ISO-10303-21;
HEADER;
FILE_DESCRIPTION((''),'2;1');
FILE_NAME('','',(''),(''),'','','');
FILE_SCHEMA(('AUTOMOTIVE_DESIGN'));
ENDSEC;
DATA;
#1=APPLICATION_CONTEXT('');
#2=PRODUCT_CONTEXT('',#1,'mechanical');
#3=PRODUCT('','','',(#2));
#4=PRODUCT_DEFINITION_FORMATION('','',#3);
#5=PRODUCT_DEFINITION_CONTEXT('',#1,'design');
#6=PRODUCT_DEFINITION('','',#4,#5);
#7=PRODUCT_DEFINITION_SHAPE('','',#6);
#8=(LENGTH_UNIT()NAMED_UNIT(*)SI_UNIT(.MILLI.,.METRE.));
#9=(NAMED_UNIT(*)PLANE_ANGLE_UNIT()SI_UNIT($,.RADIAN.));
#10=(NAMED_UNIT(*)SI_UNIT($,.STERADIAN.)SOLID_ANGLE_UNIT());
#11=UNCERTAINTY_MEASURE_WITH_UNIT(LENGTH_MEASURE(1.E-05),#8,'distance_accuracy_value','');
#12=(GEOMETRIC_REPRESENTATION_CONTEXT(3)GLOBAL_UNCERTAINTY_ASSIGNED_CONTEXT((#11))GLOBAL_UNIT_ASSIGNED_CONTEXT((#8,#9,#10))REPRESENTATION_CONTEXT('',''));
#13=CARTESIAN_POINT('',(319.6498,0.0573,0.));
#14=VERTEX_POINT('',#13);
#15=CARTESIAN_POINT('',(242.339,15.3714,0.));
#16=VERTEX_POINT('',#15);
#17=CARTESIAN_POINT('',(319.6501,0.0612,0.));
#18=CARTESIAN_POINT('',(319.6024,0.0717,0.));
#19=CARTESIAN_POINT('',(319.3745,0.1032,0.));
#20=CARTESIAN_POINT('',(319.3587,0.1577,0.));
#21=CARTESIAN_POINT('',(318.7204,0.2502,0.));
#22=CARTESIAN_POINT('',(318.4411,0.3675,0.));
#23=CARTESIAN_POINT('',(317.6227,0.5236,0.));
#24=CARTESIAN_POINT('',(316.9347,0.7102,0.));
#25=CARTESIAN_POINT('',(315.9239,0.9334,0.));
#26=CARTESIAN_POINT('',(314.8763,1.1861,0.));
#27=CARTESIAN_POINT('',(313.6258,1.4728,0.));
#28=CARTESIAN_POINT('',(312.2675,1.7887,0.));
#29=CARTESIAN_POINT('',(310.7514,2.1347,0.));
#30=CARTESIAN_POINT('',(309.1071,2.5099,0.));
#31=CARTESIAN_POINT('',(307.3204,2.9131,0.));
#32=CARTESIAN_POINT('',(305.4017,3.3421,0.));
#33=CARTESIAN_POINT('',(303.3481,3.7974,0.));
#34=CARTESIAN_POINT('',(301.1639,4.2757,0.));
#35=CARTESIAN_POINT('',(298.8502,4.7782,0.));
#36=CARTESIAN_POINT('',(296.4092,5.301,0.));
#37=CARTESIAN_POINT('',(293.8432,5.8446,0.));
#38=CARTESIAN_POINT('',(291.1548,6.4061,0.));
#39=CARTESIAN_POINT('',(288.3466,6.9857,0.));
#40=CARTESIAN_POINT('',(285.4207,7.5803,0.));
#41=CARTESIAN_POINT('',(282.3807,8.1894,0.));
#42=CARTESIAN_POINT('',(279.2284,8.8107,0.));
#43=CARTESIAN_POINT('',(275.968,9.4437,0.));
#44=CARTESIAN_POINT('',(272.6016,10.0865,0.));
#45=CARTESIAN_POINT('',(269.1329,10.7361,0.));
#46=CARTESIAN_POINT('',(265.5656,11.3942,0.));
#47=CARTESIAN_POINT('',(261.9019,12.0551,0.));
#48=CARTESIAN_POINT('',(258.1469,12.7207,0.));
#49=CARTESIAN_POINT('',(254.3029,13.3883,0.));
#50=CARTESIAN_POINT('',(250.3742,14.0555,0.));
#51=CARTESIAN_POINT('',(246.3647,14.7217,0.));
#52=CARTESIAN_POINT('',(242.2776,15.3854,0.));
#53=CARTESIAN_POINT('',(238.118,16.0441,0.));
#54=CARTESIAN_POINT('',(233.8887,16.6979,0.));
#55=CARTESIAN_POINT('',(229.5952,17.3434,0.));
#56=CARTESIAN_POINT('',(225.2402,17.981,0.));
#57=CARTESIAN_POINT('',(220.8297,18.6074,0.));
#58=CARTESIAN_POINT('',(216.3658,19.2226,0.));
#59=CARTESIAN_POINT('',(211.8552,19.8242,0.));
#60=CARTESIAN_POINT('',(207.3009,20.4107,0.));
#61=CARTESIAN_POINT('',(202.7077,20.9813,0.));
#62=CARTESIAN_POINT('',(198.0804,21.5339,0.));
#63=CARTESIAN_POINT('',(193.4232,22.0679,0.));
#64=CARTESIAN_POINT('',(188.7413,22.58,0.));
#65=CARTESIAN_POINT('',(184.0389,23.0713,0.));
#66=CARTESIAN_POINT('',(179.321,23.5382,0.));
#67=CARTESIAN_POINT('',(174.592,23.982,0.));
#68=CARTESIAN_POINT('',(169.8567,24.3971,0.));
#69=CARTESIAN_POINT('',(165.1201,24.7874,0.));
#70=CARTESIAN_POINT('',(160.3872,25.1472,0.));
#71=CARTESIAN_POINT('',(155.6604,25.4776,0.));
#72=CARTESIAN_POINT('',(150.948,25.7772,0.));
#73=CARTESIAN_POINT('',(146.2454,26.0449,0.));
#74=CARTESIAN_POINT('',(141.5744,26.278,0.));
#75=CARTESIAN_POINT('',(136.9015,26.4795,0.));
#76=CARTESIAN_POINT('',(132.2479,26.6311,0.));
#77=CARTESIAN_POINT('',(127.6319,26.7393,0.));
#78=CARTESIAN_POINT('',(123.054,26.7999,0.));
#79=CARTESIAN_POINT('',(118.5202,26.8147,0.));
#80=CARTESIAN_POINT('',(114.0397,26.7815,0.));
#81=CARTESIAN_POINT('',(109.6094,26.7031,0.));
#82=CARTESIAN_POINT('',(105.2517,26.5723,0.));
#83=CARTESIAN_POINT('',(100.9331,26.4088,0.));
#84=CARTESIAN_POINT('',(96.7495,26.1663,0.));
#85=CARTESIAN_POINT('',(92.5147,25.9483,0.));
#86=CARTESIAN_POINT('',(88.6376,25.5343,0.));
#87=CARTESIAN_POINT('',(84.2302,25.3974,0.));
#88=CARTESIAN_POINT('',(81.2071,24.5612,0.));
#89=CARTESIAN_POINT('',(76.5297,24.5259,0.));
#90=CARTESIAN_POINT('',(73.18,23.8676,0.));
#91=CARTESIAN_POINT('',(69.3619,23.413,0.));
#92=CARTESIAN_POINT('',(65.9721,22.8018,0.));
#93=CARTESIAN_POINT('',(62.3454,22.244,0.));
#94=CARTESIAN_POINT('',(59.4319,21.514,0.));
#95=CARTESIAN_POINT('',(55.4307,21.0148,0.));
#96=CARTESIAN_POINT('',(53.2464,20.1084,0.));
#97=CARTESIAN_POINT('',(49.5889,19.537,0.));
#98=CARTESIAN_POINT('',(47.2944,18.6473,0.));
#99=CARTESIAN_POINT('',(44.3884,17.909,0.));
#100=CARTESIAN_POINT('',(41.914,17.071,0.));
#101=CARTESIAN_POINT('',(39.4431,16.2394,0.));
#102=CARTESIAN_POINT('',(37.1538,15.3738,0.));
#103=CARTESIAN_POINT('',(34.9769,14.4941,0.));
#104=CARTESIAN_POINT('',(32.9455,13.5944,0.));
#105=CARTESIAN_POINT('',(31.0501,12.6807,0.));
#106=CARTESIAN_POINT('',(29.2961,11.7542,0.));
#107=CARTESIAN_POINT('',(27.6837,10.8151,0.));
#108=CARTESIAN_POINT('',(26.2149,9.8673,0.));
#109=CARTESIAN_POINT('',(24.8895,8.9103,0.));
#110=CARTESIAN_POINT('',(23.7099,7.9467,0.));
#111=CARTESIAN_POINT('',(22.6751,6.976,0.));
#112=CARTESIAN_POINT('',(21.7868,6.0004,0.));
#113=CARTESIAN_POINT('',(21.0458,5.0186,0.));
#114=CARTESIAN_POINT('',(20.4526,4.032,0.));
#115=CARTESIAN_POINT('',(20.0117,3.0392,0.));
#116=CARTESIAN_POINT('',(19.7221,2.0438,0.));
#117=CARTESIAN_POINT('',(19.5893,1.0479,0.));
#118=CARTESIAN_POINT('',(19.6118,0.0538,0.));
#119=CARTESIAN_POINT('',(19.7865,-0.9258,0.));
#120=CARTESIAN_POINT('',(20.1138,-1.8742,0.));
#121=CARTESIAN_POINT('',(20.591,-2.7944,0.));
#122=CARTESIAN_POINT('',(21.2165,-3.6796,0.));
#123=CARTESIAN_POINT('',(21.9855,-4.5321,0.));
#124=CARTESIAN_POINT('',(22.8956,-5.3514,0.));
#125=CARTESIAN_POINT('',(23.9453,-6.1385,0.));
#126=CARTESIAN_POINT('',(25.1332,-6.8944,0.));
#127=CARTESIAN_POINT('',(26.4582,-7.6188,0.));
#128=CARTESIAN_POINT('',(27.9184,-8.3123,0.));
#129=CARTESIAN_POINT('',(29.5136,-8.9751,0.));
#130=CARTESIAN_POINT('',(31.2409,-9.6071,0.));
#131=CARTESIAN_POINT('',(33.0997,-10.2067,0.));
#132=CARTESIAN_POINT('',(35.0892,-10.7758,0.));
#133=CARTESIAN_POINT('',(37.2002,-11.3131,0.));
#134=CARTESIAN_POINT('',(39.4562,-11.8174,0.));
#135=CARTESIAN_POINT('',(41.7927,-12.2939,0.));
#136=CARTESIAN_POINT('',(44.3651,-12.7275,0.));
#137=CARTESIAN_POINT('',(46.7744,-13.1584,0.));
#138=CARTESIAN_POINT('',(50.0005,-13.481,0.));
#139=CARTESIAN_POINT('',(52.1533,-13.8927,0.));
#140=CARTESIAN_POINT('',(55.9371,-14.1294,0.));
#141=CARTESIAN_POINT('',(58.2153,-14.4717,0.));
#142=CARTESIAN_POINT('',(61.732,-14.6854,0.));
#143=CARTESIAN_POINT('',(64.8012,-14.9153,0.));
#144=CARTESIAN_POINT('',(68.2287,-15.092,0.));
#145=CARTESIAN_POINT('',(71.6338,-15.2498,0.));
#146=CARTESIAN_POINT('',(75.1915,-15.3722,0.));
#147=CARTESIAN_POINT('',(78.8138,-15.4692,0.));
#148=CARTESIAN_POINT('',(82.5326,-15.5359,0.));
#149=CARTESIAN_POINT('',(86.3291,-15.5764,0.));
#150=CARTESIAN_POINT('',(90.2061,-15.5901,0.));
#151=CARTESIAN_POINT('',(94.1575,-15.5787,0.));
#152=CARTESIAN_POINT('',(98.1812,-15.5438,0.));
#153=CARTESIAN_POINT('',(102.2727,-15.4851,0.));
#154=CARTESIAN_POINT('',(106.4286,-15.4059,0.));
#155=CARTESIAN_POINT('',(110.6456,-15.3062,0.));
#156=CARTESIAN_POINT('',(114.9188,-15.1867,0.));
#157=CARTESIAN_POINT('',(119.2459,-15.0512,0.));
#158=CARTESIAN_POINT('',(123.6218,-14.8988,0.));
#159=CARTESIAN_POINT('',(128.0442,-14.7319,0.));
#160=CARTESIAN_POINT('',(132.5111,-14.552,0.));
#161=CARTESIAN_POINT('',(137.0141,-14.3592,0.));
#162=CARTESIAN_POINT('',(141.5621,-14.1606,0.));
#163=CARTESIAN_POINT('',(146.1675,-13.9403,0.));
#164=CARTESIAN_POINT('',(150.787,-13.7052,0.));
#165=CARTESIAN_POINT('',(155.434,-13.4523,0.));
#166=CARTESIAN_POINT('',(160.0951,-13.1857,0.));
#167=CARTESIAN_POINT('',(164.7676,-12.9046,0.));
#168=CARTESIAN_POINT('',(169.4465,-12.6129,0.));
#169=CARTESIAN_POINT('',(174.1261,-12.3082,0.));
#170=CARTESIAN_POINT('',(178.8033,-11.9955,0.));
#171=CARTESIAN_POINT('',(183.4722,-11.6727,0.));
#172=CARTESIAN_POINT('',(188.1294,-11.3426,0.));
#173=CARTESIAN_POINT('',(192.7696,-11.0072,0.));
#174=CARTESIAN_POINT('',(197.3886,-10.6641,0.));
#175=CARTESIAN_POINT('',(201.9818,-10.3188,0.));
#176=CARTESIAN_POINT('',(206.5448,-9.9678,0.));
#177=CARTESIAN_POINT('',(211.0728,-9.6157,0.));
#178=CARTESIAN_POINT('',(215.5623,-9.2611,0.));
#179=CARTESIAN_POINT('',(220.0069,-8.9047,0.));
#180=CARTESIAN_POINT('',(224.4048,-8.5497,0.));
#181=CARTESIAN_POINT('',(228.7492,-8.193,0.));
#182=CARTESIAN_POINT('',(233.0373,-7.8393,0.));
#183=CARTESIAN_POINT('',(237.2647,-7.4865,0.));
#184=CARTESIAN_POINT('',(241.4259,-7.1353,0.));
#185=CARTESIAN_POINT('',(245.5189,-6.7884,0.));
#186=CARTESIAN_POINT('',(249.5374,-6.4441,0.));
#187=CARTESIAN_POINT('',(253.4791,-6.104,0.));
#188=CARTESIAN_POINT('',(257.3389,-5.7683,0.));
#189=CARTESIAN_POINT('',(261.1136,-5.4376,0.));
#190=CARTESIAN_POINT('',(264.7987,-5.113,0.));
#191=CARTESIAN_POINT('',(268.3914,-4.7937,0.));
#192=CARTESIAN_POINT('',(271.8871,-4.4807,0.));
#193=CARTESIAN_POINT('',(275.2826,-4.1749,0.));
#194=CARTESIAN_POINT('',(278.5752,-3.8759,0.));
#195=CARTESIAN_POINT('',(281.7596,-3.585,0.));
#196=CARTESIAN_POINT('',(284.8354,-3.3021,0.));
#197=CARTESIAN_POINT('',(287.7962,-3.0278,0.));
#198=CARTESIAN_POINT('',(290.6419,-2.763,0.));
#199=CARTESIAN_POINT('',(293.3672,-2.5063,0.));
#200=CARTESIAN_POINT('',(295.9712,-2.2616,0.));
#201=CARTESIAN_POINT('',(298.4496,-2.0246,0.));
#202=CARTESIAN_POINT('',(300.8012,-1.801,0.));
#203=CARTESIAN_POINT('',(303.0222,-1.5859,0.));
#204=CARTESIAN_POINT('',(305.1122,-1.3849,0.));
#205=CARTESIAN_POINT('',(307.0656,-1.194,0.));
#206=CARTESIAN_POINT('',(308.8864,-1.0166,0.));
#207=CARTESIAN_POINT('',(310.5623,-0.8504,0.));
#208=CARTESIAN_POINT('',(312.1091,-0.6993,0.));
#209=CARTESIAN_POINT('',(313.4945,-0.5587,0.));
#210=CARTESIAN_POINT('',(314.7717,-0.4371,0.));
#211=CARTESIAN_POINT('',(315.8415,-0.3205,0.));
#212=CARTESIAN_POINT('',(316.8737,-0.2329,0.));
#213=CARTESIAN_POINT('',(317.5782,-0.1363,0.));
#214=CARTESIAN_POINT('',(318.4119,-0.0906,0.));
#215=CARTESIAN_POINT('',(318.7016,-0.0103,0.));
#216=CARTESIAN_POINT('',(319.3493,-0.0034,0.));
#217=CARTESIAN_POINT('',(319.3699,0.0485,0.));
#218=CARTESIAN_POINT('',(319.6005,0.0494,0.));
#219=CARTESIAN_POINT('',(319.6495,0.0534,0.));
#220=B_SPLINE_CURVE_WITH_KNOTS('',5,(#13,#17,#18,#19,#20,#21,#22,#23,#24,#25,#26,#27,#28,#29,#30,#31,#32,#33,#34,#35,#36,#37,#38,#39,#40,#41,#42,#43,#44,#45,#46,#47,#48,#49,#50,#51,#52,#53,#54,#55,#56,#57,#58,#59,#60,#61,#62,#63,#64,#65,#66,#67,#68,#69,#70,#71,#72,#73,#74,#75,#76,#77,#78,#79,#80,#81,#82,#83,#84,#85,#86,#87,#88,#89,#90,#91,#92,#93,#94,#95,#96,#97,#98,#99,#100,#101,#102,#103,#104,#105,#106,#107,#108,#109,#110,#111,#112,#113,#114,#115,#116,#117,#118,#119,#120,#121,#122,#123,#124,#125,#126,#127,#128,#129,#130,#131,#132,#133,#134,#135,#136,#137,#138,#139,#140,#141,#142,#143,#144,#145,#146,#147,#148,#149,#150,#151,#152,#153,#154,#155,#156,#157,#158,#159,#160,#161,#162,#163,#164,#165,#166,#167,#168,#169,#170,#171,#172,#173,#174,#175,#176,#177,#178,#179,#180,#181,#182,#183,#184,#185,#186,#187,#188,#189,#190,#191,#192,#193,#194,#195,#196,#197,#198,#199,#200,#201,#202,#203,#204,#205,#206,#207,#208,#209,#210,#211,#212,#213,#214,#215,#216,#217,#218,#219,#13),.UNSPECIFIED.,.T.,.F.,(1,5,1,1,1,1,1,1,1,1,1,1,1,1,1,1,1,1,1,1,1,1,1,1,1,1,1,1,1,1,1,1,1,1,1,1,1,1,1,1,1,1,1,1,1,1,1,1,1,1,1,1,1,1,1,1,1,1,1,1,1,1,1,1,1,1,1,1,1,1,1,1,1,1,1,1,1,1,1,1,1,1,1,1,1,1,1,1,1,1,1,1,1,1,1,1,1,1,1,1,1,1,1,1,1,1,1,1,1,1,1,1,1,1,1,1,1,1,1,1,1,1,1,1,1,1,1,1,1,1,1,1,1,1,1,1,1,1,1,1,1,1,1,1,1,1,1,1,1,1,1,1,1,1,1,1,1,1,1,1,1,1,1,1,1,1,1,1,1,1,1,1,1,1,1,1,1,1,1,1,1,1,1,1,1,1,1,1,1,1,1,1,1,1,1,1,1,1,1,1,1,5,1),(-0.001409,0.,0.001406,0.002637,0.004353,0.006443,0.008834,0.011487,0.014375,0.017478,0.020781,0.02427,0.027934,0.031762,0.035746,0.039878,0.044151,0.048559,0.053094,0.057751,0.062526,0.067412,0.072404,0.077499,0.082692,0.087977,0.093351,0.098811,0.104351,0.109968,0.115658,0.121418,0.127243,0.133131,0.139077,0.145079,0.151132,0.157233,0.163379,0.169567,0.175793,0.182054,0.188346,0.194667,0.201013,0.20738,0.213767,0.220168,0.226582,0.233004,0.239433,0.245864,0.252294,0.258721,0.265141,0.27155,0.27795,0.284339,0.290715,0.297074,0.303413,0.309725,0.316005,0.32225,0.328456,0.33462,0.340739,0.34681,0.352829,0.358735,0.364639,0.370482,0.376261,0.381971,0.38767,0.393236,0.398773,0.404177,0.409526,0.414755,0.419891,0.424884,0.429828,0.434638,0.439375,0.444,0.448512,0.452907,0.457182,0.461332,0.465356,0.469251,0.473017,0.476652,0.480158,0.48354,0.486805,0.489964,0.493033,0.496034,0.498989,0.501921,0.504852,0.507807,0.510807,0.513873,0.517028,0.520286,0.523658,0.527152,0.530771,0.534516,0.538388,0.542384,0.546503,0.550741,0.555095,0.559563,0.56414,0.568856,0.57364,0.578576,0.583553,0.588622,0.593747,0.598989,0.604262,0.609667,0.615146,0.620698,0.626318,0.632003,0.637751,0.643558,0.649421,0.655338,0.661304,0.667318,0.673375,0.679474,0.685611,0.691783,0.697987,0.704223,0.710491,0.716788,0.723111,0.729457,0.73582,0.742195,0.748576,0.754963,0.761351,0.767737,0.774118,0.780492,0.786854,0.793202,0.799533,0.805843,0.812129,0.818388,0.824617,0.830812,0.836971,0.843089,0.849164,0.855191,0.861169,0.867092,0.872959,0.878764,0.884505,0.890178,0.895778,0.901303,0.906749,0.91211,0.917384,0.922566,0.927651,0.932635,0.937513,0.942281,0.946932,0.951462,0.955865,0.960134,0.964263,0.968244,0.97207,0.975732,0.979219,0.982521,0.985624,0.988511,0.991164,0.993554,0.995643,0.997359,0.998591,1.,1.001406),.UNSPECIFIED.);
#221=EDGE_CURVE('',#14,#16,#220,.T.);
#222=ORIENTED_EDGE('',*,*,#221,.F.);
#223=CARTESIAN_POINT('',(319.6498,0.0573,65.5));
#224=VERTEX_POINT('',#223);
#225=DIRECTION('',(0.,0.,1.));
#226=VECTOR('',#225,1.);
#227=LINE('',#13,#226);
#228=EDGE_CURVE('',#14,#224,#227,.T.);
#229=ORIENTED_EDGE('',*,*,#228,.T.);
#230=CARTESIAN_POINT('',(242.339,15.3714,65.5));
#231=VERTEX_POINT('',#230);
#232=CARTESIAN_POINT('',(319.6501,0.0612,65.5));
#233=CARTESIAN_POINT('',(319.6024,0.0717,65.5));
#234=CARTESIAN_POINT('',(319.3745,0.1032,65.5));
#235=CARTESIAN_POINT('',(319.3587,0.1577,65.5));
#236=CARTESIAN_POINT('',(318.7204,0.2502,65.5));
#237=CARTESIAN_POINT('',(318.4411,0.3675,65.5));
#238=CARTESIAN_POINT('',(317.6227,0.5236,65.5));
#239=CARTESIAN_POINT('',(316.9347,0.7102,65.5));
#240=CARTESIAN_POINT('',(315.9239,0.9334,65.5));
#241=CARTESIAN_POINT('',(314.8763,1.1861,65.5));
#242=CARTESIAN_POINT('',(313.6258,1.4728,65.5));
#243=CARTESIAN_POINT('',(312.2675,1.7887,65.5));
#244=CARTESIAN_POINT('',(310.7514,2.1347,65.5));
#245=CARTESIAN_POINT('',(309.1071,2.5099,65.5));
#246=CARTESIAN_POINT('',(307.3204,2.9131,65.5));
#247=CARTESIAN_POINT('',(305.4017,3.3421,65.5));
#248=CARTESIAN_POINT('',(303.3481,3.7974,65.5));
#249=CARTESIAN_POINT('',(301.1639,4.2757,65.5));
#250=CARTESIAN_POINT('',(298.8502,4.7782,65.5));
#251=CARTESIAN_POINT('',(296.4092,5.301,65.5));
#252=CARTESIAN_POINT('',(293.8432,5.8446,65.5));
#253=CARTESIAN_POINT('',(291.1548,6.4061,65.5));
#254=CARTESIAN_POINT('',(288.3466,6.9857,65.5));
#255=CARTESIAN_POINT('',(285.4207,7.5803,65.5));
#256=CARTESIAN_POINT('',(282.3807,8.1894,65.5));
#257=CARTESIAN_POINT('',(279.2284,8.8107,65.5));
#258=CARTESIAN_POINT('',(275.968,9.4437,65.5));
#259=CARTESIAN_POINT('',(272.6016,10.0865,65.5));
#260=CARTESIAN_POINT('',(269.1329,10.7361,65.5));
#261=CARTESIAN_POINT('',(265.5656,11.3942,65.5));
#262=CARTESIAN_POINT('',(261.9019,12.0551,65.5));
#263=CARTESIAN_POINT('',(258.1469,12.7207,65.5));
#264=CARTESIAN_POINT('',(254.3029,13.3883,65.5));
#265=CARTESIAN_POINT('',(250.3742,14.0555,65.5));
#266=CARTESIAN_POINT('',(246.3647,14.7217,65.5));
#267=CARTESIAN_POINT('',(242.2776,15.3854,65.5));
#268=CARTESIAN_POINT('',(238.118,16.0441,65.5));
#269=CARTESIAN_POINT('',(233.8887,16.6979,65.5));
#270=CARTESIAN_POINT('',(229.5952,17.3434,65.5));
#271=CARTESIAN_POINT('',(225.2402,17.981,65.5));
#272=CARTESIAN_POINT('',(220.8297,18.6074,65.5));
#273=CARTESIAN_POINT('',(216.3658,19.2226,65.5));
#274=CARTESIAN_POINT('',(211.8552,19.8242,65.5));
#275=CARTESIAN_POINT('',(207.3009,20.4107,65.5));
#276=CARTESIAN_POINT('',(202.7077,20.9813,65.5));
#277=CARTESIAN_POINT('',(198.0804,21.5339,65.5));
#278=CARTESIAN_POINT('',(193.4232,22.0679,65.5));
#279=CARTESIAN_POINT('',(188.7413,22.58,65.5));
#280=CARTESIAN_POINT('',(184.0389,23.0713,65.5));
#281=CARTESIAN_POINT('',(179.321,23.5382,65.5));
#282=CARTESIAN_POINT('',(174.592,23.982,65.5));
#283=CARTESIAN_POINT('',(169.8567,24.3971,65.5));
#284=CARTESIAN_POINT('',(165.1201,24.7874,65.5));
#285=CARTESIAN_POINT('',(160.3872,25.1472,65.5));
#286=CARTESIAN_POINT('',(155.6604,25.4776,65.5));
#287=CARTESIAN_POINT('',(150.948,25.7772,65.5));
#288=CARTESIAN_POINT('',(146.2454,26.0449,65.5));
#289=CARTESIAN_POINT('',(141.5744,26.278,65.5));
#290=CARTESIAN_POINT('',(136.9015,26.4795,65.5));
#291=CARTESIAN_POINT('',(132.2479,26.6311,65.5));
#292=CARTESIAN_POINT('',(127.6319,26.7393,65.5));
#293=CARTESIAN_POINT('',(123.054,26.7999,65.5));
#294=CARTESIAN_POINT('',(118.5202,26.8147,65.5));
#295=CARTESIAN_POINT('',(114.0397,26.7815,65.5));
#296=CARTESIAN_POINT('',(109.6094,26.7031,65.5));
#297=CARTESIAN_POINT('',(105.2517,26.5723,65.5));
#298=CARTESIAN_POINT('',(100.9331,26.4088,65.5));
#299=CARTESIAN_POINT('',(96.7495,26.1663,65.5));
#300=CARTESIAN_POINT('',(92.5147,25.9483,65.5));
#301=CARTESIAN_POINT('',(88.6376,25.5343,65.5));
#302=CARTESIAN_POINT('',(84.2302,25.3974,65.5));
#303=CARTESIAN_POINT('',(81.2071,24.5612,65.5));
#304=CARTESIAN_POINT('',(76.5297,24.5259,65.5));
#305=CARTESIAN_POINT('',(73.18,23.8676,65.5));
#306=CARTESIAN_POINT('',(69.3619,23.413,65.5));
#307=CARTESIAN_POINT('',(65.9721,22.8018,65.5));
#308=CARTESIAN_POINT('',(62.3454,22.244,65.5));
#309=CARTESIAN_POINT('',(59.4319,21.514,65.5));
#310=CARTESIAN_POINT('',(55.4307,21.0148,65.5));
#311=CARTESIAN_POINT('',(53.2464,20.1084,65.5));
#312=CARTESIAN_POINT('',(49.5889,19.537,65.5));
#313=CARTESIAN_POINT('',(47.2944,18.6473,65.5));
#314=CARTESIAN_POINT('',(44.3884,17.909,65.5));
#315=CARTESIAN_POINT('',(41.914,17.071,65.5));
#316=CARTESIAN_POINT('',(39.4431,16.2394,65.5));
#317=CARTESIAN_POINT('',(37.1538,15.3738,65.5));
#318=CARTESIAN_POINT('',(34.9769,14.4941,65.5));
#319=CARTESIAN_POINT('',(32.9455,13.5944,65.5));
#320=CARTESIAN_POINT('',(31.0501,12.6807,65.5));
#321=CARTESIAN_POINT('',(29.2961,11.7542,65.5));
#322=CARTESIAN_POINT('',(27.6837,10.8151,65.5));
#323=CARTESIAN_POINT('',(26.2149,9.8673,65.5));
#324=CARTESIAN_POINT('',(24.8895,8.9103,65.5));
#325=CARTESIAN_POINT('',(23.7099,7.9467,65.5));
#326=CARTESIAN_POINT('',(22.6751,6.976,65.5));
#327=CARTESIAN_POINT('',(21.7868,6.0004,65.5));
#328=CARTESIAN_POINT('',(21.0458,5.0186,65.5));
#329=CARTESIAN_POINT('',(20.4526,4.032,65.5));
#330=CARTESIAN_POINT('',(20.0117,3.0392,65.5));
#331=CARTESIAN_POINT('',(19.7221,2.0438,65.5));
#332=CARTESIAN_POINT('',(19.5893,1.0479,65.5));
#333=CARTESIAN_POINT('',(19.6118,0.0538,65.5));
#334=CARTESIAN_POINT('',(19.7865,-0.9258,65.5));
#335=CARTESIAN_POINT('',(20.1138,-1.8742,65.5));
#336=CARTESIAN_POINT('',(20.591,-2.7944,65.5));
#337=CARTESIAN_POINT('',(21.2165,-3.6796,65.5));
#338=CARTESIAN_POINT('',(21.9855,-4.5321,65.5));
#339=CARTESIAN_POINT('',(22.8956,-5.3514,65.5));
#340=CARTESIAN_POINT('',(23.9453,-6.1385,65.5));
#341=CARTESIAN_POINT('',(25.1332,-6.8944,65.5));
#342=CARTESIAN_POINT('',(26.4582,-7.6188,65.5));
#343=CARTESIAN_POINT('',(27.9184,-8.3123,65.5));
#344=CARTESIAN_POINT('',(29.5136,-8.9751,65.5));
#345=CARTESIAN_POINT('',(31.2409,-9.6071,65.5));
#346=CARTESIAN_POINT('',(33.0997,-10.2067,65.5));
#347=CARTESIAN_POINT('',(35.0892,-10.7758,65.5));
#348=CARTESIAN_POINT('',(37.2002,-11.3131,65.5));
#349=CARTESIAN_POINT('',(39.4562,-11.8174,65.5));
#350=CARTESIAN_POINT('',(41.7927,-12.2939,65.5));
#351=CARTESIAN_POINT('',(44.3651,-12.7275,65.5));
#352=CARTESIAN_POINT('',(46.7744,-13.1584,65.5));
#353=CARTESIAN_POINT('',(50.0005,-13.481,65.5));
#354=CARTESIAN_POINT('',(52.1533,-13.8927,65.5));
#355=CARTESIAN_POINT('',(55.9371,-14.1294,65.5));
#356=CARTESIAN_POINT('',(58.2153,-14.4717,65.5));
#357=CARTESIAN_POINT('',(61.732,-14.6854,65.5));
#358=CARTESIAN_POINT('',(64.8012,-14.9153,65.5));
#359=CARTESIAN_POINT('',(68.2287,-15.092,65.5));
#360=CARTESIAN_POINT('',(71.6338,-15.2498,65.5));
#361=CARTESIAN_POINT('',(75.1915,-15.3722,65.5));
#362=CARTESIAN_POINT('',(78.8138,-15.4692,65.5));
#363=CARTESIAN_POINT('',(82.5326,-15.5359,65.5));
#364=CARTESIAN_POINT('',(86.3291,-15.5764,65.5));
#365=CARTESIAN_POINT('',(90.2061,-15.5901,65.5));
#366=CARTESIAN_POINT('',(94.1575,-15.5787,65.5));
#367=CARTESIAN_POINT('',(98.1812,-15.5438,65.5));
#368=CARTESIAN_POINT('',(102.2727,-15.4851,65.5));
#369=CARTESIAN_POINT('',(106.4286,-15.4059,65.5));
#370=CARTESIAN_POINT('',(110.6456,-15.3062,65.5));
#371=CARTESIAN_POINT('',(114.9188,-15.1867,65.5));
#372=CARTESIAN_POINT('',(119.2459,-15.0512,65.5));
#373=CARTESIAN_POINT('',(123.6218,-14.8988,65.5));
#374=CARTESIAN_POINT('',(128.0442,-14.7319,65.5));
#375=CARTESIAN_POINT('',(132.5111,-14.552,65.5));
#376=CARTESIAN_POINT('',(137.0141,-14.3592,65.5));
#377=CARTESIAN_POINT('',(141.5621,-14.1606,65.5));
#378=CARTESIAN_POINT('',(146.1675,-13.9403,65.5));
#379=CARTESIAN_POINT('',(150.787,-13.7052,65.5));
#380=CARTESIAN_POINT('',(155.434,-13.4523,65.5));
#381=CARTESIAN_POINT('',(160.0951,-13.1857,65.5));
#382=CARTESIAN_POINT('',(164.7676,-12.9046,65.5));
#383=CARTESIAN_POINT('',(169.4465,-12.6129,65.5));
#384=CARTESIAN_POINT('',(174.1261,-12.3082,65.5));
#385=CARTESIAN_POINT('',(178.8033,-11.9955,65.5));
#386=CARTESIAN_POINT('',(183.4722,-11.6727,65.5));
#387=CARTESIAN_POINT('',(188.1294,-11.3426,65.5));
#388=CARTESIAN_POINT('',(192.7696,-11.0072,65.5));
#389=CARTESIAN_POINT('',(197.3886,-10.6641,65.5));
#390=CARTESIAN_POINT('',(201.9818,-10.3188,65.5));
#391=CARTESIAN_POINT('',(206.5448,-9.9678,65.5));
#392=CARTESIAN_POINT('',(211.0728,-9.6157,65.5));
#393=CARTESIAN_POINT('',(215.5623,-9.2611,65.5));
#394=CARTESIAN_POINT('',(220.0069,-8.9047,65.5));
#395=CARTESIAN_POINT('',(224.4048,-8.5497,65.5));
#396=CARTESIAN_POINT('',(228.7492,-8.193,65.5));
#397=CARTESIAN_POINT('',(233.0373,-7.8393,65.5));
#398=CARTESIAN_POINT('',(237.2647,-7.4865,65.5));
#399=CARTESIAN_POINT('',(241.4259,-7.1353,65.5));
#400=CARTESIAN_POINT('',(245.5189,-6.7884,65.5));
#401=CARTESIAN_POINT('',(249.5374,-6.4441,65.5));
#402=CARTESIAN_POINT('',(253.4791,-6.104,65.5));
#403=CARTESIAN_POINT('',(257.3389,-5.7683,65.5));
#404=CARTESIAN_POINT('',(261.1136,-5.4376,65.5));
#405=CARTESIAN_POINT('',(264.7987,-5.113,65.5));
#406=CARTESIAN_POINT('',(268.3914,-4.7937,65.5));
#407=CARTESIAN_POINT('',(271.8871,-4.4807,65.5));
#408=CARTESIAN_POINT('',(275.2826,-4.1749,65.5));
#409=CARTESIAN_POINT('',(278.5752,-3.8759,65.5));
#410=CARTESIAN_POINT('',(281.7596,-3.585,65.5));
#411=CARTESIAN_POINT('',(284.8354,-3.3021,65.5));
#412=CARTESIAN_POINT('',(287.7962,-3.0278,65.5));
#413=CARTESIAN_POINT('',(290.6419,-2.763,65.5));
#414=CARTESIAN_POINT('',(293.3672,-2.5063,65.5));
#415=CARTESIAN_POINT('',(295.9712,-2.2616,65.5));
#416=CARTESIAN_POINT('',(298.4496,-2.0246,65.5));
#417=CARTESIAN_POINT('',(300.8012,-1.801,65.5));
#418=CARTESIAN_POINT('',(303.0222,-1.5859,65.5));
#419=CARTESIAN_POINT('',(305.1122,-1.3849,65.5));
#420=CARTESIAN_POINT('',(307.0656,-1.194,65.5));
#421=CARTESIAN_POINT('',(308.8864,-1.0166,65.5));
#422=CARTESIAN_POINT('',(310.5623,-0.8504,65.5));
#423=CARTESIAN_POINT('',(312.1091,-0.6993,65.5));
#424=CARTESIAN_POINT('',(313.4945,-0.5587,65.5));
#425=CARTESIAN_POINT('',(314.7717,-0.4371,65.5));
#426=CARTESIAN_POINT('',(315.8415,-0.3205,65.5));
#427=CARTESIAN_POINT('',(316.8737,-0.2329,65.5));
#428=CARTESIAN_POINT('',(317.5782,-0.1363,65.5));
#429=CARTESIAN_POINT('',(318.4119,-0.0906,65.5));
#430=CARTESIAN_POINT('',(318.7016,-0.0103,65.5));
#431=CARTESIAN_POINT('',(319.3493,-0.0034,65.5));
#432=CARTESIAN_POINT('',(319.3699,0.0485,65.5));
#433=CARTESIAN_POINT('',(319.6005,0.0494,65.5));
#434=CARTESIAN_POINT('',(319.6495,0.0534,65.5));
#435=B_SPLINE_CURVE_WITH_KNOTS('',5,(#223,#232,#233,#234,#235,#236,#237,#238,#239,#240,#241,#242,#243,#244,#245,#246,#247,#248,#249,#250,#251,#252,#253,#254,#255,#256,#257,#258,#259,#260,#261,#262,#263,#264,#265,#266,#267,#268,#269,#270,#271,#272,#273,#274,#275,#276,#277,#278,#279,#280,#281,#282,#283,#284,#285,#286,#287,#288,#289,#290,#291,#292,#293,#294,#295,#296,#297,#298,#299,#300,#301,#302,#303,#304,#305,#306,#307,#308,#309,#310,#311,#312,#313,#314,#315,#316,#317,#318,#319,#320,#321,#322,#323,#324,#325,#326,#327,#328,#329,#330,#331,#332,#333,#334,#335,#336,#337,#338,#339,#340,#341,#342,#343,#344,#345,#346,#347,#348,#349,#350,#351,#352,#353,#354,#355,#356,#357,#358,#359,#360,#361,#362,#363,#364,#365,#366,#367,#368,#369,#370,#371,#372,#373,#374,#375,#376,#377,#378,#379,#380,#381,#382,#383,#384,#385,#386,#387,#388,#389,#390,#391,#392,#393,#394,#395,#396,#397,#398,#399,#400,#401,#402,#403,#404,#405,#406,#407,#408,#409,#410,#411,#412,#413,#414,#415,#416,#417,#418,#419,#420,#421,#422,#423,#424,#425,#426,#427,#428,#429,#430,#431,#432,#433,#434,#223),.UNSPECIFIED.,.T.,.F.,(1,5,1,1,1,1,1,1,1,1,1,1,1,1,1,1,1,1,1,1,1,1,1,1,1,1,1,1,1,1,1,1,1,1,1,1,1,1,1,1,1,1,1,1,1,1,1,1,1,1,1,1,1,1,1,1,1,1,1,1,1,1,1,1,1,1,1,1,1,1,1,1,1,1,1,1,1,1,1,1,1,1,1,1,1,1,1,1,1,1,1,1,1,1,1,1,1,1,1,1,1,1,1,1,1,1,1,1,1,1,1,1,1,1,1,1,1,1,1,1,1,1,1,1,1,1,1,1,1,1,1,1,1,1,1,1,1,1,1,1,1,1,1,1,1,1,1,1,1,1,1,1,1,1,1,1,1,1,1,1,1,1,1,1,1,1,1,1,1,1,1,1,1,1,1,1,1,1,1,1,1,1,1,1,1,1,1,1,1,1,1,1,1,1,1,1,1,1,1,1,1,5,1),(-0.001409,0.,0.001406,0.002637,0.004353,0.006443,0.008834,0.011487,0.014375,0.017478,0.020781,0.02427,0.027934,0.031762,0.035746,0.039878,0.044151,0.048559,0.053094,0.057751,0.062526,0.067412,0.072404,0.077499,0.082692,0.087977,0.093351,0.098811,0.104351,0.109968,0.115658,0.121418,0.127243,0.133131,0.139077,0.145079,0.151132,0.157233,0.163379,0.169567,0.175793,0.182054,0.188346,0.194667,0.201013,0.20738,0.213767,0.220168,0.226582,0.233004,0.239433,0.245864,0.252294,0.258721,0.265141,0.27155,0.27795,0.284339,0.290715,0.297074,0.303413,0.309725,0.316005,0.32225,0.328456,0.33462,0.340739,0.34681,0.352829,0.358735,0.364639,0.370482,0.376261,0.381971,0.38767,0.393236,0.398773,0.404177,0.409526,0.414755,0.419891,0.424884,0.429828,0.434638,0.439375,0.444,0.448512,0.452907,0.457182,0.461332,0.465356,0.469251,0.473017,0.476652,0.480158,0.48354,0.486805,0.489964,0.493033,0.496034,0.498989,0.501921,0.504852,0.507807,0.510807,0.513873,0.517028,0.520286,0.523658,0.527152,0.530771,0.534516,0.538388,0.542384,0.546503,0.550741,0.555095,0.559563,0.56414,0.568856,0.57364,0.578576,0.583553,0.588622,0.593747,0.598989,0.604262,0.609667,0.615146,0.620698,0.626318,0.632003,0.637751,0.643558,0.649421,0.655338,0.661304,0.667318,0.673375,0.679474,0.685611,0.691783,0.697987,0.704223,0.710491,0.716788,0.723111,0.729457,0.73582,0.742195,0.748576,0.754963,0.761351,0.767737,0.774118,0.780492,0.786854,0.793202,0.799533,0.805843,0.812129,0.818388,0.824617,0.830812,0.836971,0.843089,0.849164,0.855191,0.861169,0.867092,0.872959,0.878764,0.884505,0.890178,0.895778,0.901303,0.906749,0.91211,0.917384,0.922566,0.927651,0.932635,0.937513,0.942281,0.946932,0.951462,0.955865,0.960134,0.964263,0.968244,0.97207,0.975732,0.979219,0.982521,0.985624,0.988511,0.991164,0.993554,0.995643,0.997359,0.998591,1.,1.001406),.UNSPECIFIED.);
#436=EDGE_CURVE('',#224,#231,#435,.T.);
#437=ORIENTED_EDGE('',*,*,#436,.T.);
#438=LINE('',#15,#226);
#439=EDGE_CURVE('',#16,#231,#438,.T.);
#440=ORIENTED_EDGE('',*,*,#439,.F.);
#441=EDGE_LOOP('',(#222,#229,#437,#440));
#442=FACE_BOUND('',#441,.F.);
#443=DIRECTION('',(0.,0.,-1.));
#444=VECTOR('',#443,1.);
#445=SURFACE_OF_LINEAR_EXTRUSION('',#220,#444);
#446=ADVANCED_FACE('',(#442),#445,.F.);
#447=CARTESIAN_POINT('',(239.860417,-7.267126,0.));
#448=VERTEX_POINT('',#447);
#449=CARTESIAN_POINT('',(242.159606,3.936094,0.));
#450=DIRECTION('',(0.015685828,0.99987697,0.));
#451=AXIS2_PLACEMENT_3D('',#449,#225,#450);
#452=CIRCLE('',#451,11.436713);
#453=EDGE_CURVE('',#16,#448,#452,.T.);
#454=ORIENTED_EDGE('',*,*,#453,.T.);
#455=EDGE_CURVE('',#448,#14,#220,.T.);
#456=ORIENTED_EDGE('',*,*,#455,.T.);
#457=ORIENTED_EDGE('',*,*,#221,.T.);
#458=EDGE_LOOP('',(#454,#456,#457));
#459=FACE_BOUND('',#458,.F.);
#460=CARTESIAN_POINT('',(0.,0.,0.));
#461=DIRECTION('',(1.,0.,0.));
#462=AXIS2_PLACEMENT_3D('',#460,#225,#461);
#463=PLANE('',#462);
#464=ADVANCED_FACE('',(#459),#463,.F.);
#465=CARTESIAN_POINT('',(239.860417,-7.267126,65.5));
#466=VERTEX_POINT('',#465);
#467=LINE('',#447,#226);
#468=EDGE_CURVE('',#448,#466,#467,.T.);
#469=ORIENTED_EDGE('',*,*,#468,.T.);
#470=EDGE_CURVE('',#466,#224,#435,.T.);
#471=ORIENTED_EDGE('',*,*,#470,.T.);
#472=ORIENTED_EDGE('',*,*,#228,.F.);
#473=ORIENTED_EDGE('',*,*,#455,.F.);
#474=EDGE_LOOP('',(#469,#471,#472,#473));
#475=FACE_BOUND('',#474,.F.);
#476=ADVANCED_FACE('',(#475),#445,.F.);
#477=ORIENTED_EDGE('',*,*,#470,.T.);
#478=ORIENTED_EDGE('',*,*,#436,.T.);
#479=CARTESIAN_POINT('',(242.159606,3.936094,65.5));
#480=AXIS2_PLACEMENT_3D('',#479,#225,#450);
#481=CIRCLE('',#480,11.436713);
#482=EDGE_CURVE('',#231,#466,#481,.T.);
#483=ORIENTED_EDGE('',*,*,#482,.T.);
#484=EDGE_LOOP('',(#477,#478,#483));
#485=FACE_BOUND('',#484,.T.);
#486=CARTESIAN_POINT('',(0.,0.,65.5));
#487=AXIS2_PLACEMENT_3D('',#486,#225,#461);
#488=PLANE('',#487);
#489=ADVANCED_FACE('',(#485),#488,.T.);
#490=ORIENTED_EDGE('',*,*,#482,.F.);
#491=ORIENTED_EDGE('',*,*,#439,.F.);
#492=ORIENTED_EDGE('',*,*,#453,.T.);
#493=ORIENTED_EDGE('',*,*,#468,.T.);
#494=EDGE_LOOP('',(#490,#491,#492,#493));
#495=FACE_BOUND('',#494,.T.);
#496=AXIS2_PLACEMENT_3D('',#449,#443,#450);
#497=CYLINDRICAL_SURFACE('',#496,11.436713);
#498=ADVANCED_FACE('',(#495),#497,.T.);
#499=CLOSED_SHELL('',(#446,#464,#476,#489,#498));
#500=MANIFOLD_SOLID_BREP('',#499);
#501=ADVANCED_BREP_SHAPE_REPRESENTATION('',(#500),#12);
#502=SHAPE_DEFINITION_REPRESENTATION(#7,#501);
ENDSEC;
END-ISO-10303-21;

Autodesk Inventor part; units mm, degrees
ref_plane "YZ Plane" through (0, 0, 0) normal (1, 0, 0) x (0, 1, 0)
ref_plane "XZ Plane" through (0, 0, 0) normal (0, 1, 0) x (-1, 0, 0)
ref_plane "XY Plane" through (0, 0, 0) normal (0, 0, 1) x (1, 0, 0)
sketch "Sketch2" plane through (0, 0, 0) normal (0, 0, 1) x (1, 0, 0)
  spline S0 degree 5 poles (319.6498, 0.0573) (319.6501, 0.0612) (319.6024, 0.0717) (319.3745, 0.1032) (319.3587, 0.1577) (318.7204, 0.2502) (318.4411, 0.3675) (317.6227, 0.5236) (316.9347, 0.7102) (315.9239, 0.9334) (314.8763, 1.1861) (313.6258, 1.4728) (312.2675, 1.7887) (310.7514, 2.1347) (309.1071, 2.5099) (307.3204, 2.9131) (305.4017, 3.3421) (303.3481, 3.7974) (301.1639, 4.2757) (298.8502, 4.7782) (296.4092, 5.301) (293.8432, 5.8446) (291.1548, 6.4061) (288.3466, 6.9857) (285.4207, 7.5803) (282.3807, 8.1894) (279.2284, 8.8107) (275.968, 9.4437) (272.6016, 10.0865) (269.1329, 10.7361) (265.5656, 11.3942) (261.9019, 12.0551) (258.1469, 12.7207) (254.3029, 13.3883) (250.3742, 14.0555) (246.3647, 14.7217) (242.2776, 15.3854) (238.118, 16.0441) (233.8887, 16.6979) (229.5952, 17.3434) (225.2402, 17.981) (220.8297, 18.6074) (216.3658, 19.2226) (211.8552, 19.8242) (207.3009, 20.4107) (202.7077, 20.9813) (198.0804, 21.5339) (193.4232, 22.0679) (188.7413, 22.58) (184.0389, 23.0713) (179.321, 23.5382) (174.592, 23.982) (169.8567, 24.3971) (165.1201, 24.7874) (160.3872, 25.1472) (155.6604, 25.4776) (150.948, 25.7772) (146.2454, 26.0449) (141.5744, 26.278) (136.9015, 26.4795) (132.2479, 26.6311) (127.6319, 26.7393) (123.054, 26.7999) (118.5202, 26.8147) (114.0397, 26.7815) (109.6094, 26.7031) (105.2517, 26.5723) (100.9331, 26.4088) (96.7495, 26.1663) (92.5147, 25.9483) (88.6376, 25.5343) (84.2302, 25.3974) (81.2071, 24.5612) (76.5297, 24.5259) (73.18, 23.8676) (69.3619, 23.413) (65.9721, 22.8018) (62.3454, 22.244) (59.4319, 21.514) (55.4307, 21.0148) (53.2464, 20.1084) (49.5889, 19.537) (47.2944, 18.6473) (44.3884, 17.909) (41.914, 17.071) (39.4431, 16.2394) (37.1538, 15.3738) (34.9769, 14.4941) (32.9455, 13.5944) (31.0501, 12.6807) (29.2961, 11.7542) (27.6837, 10.8151) (26.2149, 9.8673) (24.8895, 8.9103) (23.7099, 7.9467) (22.6751, 6.976) (21.7868, 6.0004) (21.0458, 5.0186) (20.4526, 4.032) (20.0117, 3.0392) (19.7221, 2.0438) (19.5893, 1.0479) (19.6118, 0.0538) (19.7865, -0.9258) (20.1138, -1.8742) (20.591, -2.7944) (21.2165, -3.6796) (21.9855, -4.5321) (22.8956, -5.3514) (23.9453, -6.1385) (25.1332, -6.8944) (26.4582, -7.6188) (27.9184, -8.3123) (29.5136, -8.9751) (31.2409, -9.6071) (33.0997, -10.2067) (35.0892, -10.7758) (37.2002, -11.3131) (39.4562, -11.8174) (41.7927, -12.2939) (44.3651, -12.7275) (46.7744, -13.1584) (50.0005, -13.481) (52.1533, -13.8927) (55.9371, -14.1294) (58.2153, -14.4717) (61.732, -14.6854) (64.8012, -14.9153) (68.2287, -15.092) (71.6338, -15.2498) (75.1915, -15.3722) (78.8138, -15.4692) (82.5326, -15.5359) (86.3291, -15.5764) (90.2061, -15.5901) (94.1575, -15.5787) (98.1812, -15.5438) (102.2727, -15.4851) (106.4286, -15.4059) (110.6456, -15.3062) (114.9188, -15.1867) (119.2459, -15.0512) (123.6218, -14.8988) (128.0442, -14.7319) (132.5111, -14.552) (137.0141, -14.3592) (141.5621, -14.1606) (146.1675, -13.9403) (150.787, -13.7052) (155.434, -13.4523) (160.0951, -13.1857) (164.7676, -12.9046) (169.4465, -12.6129) (174.1261, -12.3082) (178.8033, -11.9955) (183.4722, -11.6727) (188.1294, -11.3426) (192.7696, -11.0072) (197.3886, -10.6641) (201.9818, -10.3188) (206.5448, -9.9678) (211.0728, -9.6157) (215.5623, -9.2611) (220.0069, -8.9047) (224.4048, -8.5497) (228.7492, -8.193) (233.0373, -7.8393) (237.2647, -7.4865) (241.4259, -7.1353) (245.5189, -6.7884) (249.5374, -6.4441) (253.4791, -6.104) (257.3389, -5.7683) (261.1136, -5.4376) (264.7987, -5.113) (268.3914, -4.7937) (271.8871, -4.4807) (275.2826, -4.1749) (278.5752, -3.8759) (281.7596, -3.585) (284.8354, -3.3021) (287.7962, -3.0278) (290.6419, -2.763) (293.3672, -2.5063) (295.9712, -2.2616) (298.4496, -2.0246) (300.8012, -1.801) (303.0222, -1.5859) (305.1122, -1.3849) (307.0656, -1.194) (308.8864, -1.0166) (310.5623, -0.8504) (312.1091, -0.6993) (313.4945, -0.5587) (314.7717, -0.4371) (315.8415, -0.3205) (316.8737, -0.2329) (317.5782, -0.1363) (318.4119, -0.0906) (318.7016, -0.0103) (319.3493, -0.0034) (319.3699, 0.0485) (319.6005, 0.0494) (319.6495, 0.0534) (319.6498, 0.0573) knots 0 0 0 0 0 0 0.001406 0.002637 0.004353 0.006443 0.008834 0.011487 0.014375 0.017478 0.020781 0.02427 0.027934 0.031762 0.035746 0.039878 0.044151 0.048559 0.053094 0.057751 0.062526 0.067412 0.072404 0.077499 0.082692 0.087977 0.093351 0.098811 0.104351 0.109968 0.115658 0.121418 0.127243 0.133131 0.139077 0.145079 0.151132 0.157233 0.163379 0.169567 0.175793 0.182054 0.188346 0.194667 0.201013 0.20738 0.213767 0.220168 0.226582 0.233004 0.239433 0.245864 0.252294 0.258721 0.265141 0.27155 0.27795 0.284339 0.290715 0.297074 0.303413 0.309725 0.316005 0.32225 0.328456 0.33462 0.340739 0.34681 0.352829 0.358735 0.364639 0.370482 0.376261 0.381971 0.38767 0.393236 0.398773 0.404177 0.409526 0.414755 0.419891 0.424884 0.429828 0.434638 0.439375 0.444 0.448512 0.452907 0.457182 0.461332 0.465356 0.469251 0.473017 0.476652 0.480158 0.48354 0.486805 0.489964 0.493033 0.496034 0.498989 0.501921 0.504852 0.507807 0.510807 0.513873 0.517028 0.520286 0.523658 0.527152 0.530771 0.534516 0.538388 0.542384 0.546503 0.550741 0.555095 0.559563 0.56414 0.568856 0.57364 0.578576 0.583553 0.588622 0.593747 0.598989 0.604262 0.609667 0.615146 0.620698 0.626318 0.632003 0.637751 0.643558 0.649421 0.655338 0.661304 0.667318 0.673375 0.679474 0.685611 0.691783 0.697987 0.704223 0.710491 0.716788 0.723111 0.729457 0.73582 0.742195 0.748576 0.754963 0.761351 0.767737 0.774118 0.780492 0.786854 0.793202 0.799533 0.805843 0.812129 0.818388 0.824617 0.830812 0.836971 0.843089 0.849164 0.855191 0.861169 0.867092 0.872959 0.878764 0.884505 0.890178 0.895778 0.901303 0.906749 0.91211 0.917384 0.922566 0.927651 0.932635 0.937513 0.942281 0.946932 0.951462 0.955865 0.960134 0.964263 0.968244 0.97207 0.975732 0.979219 0.982521 0.985624 0.988511 0.991164 0.993554 0.995643 0.997359 0.998591 1 1 1 1 1 1
  circle A0 centre (83.0595, 4.5678) radius 11.5675
  line L0 (83.0595, 4.5678) -> (83.0595, 25.0384) construction
  line L1 (83.0595, 4.5678) -> (209.6498, 4.5678) construction
  line L2 (319.6498, 0.0573) -> (219.6498, 0.0573) construction
  line L3 (219.6499, 18.7671) -> (219.6499, -8.9327) construction
  line L4 (28.0055, 4.5054) -> (28.0055, -2.4946)
  line L5 (19.627, 1.0326) -> (319.6498, 0.0573) construction
  line L6 (49.7105, 14.4213) -> (55.6079, 14.4213)
  line L7 (49.7104, -8.4915) -> (55.6078, -8.4915)
  line L8 (28.0055, 4.5054) -> (49.7105, 14.4213)
  line L9 (28.0055, -2.4946) -> (49.7104, -8.4915)
  line L10 (55.6079, 14.4213) -> (55.6079, 20.8726)
  line L11 (55.6078, -8.4915) -> (55.6078, -14.1513)
  line L12 (108.6496, 16.3299) -> (108.6496, -7.1942)
  line L13 (110.8735, -9.1817) -> (193.8736, 0.1678)
  line L14 (195.6498, 2.1552) -> (195.6498, 6.9805)
  line L15 (193.8736, 8.9679) -> (110.8735, 18.3173)
  arc A1 (110.8735, 18.3173) -> (108.6496, 16.3299) centre (110.6496, 16.3299) ccw
  arc A2 (108.6496, -7.1942) -> (110.8735, -9.1817) centre (110.6496, -7.1942) ccw
  arc A3 (193.8736, 0.1678) -> (195.6498, 2.1552) centre (193.6498, 2.1552) ccw
  arc A4 (195.6498, 6.9805) -> (193.8736, 8.9679) centre (193.6498, 6.9805) ccw
  circle A5 centre (209.6498, 0.0573) radius 3
  line L16 (319.6498, 0.0573) -> (229.6498, 0.0573) construction
  arc A6 (242.339, 15.3714) -> (241.4866, -7.4808) centre (242.1596, 3.9361) ccw
  point P0 (0, 0)
  point P1 (319.3573, 0.1272)
  point P2 (318.9918, 0.2142)
  point P3 (318.4802, 0.3354)
  point P4 (317.8238, 0.4911)
  point P5 (317.0222, 0.6801)
  point P6 (316.0769, 0.9024)
  point P7 (314.9885, 1.1568)
  point P8 (313.7582, 1.443)
  point P9 (312.3866, 1.7598)
  point P10 (310.8752, 2.1063)
  point P11 (309.2258, 2.4819)
  point P12 (307.4393, 2.8854)
  point P13 (305.5178, 3.3153)
  point P14 (303.4628, 3.7707)
  point P15 (301.2764, 4.2501)
  point P16 (298.9607, 4.7526)
  point P17 (296.5175, 5.2764)
  point P18 (293.9492, 5.8203)
  point P19 (291.2585, 6.3828)
  point P20 (288.4478, 6.9627)
  point P21 (285.5195, 7.5582)
  point P22 (282.4766, 8.1678)
  point P23 (279.3218, 8.79)
  point P24 (276.0584, 9.4236)
  point P25 (272.6891, 10.0668)
  point P26 (269.2175, 10.7178)
  point P27 (265.6469, 11.3757)
  point P28 (261.9803, 12.0381)
  point P29 (258.2219, 12.7041)
  point P30 (254.3747, 13.3722)
  point P31 (250.4426, 14.0403)
  point P32 (246.4295, 14.7072)
  point P33 (238.1756, 16.0311)
  point P34 (233.9428, 16.6851)
  point P35 (229.6454, 17.3316)
  point P36 (225.2869, 17.9694)
  point P37 (220.8723, 18.5967)
  point P38 (216.4049, 19.2123)
  point P39 (211.8901, 19.8144)
  point P40 (207.332, 20.4015)
  point P41 (202.7347, 20.9724)
  point P42 (198.1034, 21.5256)
  point P43 (193.4423, 22.0596)
  point P44 (188.7563, 22.5726)
  point P45 (184.0499, 23.0637)
  point P46 (179.3279, 23.5314)
  point P47 (174.5948, 23.9745)
  point P48 (169.8554, 24.3909)
  point P49 (165.1148, 24.7803)
  point P50 (160.3775, 25.1406)
  point P51 (155.6479, 25.4709)
  point P52 (150.9316, 25.7703)
  point P53 (146.233, 26.0373)
  point P54 (141.557, 26.2707)
  point P55 (136.882, 26.4681)
  point P56 (132.2209, 26.6211)
  point P57 (127.5964, 26.7282)
  point P58 (123.0133, 26.7888)
  point P59 (118.4761, 26.8026)
  point P60 (113.9902, 26.7693)
  point P61 (109.5601, 26.6886)
  point P62 (105.191, 26.5611)
  point P63 (100.8866, 26.3866)
  point P64 (96.6524, 26.1647)
  point P65 (92.4927, 25.8975)
  point P66 (88.4121, 25.5832)
  point P67 (84.4152, 25.2282)
  point P68 (80.9052, 24.7441)
  point P69 (76.6873, 24.3761)
  point P70 (72.9635, 23.8905)
  point P71 (69.3402, 23.3611)
  point P72 (65.8208, 22.7938)
  point P73 (62.4086, 22.1883)
  point P74 (59.107, 21.5464)
  point P75 (52.8493, 20.1606)
  point P76 (49.7105, 19.4213)
  point P77 (47.0737, 18.6507)
  point P78 (44.3741, 17.8542)
  point P79 (41.8034, 17.0322)
  point P80 (39.3638, 16.1874)
  point P81 (37.0583, 15.3213)
  point P82 (34.8884, 14.4363)
  point P83 (32.8568, 13.534)
  point P84 (30.965, 12.6166)
  point P85 (29.2145, 11.686)
  point P86 (27.6071, 10.7437)
  point P87 (26.1443, 9.7921)
  point P88 (24.8269, 8.8324)
  point P89 (23.6566, 7.8664)
  point P90 (22.6336, 6.8953)
  point P91 (21.7591, 5.9209)
  point P92 (21.0334, 4.9441)
  point P93 (20.4571, 3.9661)
  point P94 (20.0308, 2.9875)
  point P95 (19.7539, 2.0098)
  point P96 (19.6496, 0.0573)
  point P97 (19.8205, -0.9033)
  point P98 (20.1376, -1.8357)
  point P99 (20.6002, -2.7402)
  point P100 (21.208, -3.6159)
  point P101 (21.9598, -4.4628)
  point P102 (22.8544, -5.2806)
  point P103 (23.8909, -6.069)
  point P104 (25.0681, -6.8277)
  point P105 (26.3846, -7.5561)
  point P106 (27.8384, -8.2539)
  point P107 (29.4284, -8.9211)
  point P108 (31.1522, -9.5571)
  point P109 (33.0086, -10.1613)
  point P110 (34.9949, -10.734)
  point P111 (37.1093, -11.2746)
  point P112 (39.3497, -11.7828)
  point P113 (41.7134, -12.2586)
  point P114 (44.198, -12.702)
  point P115 (46.8014, -13.1127)
  point P116 (49.7104, -13.4915)
  point P117 (52.3532, -13.8357)
  point P118 (58.3469, -14.4294)
  point P119 (61.5023, -14.6781)
  point P120 (64.7591, -14.8953)
  point P121 (68.1149, -15.0813)
  point P122 (71.5661, -15.237)
  point P123 (75.1094, -15.3627)
  point P124 (78.7418, -15.4596)
  point P125 (82.46, -15.528)
  point P126 (86.2607, -15.5691)
  point P127 (90.14, -15.5838)
  point P128 (94.0946, -15.5733)
  point P129 (98.1212, -15.5388)
  point P130 (102.2159, -15.4812)
  point P131 (106.3751, -15.4023)
  point P132 (110.5952, -15.303)
  point P133 (114.872, -15.1845)
  point P134 (119.2022, -15.0489)
  point P135 (123.5813, -14.8971)
  point P136 (128.006, -14.7306)
  point P137 (132.4718, -14.5509)
  point P138 (136.9748, -14.3598)
  point P139 (141.5285, -14.1576)
  point P140 (146.1365, -13.9383)
  point P141 (150.7679, -13.7022)
  point P142 (155.4191, -13.4499)
  point P143 (160.0853, -13.1829)
  point P144 (164.7617, -12.9024)
  point P145 (169.4444, -12.6099)
  point P146 (174.1283, -12.306)
  point P147 (178.8092, -11.9925)
  point P148 (183.4823, -11.67)
  point P149 (188.1434, -11.34)
  point P150 (192.7877, -11.0037)
  point P151 (197.4106, -10.6614)
  point P152 (202.0079, -10.3149)
  point P153 (206.5747, -9.9645)
  point P154 (211.1069, -9.6117)
  point P155 (215.5999, -9.2568)
  point P156 (220.0489, -8.9007)
  point P157 (224.4503, -8.5446)
  point P158 (228.7987, -8.1885)
  point P159 (233.0906, -7.8339)
  point P160 (237.3214, -7.4808)
  point P161 (241.4866, -7.1298)
  point P162 (245.5828, -6.7821)
  point P163 (249.6052, -6.4377)
  point P164 (253.5502, -6.0972)
  point P165 (257.4136, -5.7612)
  point P166 (261.1915, -5.4303)
  point P167 (264.88, -5.1051)
  point P168 (268.4758, -4.7856)
  point P169 (271.9747, -4.4724)
  point P170 (275.3734, -4.1661)
  point P171 (278.6686, -3.867)
  point P172 (281.8564, -3.5757)
  point P173 (284.9344, -3.2925)
  point P174 (287.8984, -3.018)
  point P175 (290.7463, -2.7525)
  point P176 (293.4745, -2.4963)
  point P177 (296.0806, -2.2503)
  point P178 (298.5616, -2.0142)
  point P179 (300.9151, -1.7892)
  point P180 (303.1387, -1.575)
  point P181 (305.23, -1.3728)
  point P182 (307.1866, -1.1823)
  point P183 (309.007, -1.0041)
  point P184 (310.6885, -0.8385)
  point P185 (312.2302, -0.6861)
  point P186 (313.6297, -0.5472)
  point P187 (314.8861, -0.4221)
  point P188 (315.9976, -0.3108)
  point P189 (316.9636, -0.2139)
  point P190 (317.7826, -0.1314)
  point P191 (318.4537, -0.0636)
  point P192 (318.9766, -0.0108)
  point P193 (319.3503, 0.027)
  point P194 (319.5743, 0.0498)
  point P195 (28.0055, 1.0054)
  point P196 (108.6496, 18.5678)
  point P197 (108.6496, -9.4322)
  point P198 (195.6498, 0.3678)
  point P199 (195.6498, 8.7678)
  dimension "d2" = 300.0001
  dimension "d22" = 100
  dimension "d23" = 7
  dimension "d24" = 5
  dimension "d25" = 5
  dimension "d30" = 28
  dimension "d31" = 8.4
  dimension "d34" = 2
  dimension "d37" = 23.135
  dimension "d43" = 63.4325
  dimension "d44" = 6
  dimension "d45" = 110
  dimension "d46" = 90
extrude "Extrusion6" add sketch "Sketch2" along normal blind 65.5 contours S0 A6
properties part number "2414 basic aerofoil" material "Polyurethane Foam"
